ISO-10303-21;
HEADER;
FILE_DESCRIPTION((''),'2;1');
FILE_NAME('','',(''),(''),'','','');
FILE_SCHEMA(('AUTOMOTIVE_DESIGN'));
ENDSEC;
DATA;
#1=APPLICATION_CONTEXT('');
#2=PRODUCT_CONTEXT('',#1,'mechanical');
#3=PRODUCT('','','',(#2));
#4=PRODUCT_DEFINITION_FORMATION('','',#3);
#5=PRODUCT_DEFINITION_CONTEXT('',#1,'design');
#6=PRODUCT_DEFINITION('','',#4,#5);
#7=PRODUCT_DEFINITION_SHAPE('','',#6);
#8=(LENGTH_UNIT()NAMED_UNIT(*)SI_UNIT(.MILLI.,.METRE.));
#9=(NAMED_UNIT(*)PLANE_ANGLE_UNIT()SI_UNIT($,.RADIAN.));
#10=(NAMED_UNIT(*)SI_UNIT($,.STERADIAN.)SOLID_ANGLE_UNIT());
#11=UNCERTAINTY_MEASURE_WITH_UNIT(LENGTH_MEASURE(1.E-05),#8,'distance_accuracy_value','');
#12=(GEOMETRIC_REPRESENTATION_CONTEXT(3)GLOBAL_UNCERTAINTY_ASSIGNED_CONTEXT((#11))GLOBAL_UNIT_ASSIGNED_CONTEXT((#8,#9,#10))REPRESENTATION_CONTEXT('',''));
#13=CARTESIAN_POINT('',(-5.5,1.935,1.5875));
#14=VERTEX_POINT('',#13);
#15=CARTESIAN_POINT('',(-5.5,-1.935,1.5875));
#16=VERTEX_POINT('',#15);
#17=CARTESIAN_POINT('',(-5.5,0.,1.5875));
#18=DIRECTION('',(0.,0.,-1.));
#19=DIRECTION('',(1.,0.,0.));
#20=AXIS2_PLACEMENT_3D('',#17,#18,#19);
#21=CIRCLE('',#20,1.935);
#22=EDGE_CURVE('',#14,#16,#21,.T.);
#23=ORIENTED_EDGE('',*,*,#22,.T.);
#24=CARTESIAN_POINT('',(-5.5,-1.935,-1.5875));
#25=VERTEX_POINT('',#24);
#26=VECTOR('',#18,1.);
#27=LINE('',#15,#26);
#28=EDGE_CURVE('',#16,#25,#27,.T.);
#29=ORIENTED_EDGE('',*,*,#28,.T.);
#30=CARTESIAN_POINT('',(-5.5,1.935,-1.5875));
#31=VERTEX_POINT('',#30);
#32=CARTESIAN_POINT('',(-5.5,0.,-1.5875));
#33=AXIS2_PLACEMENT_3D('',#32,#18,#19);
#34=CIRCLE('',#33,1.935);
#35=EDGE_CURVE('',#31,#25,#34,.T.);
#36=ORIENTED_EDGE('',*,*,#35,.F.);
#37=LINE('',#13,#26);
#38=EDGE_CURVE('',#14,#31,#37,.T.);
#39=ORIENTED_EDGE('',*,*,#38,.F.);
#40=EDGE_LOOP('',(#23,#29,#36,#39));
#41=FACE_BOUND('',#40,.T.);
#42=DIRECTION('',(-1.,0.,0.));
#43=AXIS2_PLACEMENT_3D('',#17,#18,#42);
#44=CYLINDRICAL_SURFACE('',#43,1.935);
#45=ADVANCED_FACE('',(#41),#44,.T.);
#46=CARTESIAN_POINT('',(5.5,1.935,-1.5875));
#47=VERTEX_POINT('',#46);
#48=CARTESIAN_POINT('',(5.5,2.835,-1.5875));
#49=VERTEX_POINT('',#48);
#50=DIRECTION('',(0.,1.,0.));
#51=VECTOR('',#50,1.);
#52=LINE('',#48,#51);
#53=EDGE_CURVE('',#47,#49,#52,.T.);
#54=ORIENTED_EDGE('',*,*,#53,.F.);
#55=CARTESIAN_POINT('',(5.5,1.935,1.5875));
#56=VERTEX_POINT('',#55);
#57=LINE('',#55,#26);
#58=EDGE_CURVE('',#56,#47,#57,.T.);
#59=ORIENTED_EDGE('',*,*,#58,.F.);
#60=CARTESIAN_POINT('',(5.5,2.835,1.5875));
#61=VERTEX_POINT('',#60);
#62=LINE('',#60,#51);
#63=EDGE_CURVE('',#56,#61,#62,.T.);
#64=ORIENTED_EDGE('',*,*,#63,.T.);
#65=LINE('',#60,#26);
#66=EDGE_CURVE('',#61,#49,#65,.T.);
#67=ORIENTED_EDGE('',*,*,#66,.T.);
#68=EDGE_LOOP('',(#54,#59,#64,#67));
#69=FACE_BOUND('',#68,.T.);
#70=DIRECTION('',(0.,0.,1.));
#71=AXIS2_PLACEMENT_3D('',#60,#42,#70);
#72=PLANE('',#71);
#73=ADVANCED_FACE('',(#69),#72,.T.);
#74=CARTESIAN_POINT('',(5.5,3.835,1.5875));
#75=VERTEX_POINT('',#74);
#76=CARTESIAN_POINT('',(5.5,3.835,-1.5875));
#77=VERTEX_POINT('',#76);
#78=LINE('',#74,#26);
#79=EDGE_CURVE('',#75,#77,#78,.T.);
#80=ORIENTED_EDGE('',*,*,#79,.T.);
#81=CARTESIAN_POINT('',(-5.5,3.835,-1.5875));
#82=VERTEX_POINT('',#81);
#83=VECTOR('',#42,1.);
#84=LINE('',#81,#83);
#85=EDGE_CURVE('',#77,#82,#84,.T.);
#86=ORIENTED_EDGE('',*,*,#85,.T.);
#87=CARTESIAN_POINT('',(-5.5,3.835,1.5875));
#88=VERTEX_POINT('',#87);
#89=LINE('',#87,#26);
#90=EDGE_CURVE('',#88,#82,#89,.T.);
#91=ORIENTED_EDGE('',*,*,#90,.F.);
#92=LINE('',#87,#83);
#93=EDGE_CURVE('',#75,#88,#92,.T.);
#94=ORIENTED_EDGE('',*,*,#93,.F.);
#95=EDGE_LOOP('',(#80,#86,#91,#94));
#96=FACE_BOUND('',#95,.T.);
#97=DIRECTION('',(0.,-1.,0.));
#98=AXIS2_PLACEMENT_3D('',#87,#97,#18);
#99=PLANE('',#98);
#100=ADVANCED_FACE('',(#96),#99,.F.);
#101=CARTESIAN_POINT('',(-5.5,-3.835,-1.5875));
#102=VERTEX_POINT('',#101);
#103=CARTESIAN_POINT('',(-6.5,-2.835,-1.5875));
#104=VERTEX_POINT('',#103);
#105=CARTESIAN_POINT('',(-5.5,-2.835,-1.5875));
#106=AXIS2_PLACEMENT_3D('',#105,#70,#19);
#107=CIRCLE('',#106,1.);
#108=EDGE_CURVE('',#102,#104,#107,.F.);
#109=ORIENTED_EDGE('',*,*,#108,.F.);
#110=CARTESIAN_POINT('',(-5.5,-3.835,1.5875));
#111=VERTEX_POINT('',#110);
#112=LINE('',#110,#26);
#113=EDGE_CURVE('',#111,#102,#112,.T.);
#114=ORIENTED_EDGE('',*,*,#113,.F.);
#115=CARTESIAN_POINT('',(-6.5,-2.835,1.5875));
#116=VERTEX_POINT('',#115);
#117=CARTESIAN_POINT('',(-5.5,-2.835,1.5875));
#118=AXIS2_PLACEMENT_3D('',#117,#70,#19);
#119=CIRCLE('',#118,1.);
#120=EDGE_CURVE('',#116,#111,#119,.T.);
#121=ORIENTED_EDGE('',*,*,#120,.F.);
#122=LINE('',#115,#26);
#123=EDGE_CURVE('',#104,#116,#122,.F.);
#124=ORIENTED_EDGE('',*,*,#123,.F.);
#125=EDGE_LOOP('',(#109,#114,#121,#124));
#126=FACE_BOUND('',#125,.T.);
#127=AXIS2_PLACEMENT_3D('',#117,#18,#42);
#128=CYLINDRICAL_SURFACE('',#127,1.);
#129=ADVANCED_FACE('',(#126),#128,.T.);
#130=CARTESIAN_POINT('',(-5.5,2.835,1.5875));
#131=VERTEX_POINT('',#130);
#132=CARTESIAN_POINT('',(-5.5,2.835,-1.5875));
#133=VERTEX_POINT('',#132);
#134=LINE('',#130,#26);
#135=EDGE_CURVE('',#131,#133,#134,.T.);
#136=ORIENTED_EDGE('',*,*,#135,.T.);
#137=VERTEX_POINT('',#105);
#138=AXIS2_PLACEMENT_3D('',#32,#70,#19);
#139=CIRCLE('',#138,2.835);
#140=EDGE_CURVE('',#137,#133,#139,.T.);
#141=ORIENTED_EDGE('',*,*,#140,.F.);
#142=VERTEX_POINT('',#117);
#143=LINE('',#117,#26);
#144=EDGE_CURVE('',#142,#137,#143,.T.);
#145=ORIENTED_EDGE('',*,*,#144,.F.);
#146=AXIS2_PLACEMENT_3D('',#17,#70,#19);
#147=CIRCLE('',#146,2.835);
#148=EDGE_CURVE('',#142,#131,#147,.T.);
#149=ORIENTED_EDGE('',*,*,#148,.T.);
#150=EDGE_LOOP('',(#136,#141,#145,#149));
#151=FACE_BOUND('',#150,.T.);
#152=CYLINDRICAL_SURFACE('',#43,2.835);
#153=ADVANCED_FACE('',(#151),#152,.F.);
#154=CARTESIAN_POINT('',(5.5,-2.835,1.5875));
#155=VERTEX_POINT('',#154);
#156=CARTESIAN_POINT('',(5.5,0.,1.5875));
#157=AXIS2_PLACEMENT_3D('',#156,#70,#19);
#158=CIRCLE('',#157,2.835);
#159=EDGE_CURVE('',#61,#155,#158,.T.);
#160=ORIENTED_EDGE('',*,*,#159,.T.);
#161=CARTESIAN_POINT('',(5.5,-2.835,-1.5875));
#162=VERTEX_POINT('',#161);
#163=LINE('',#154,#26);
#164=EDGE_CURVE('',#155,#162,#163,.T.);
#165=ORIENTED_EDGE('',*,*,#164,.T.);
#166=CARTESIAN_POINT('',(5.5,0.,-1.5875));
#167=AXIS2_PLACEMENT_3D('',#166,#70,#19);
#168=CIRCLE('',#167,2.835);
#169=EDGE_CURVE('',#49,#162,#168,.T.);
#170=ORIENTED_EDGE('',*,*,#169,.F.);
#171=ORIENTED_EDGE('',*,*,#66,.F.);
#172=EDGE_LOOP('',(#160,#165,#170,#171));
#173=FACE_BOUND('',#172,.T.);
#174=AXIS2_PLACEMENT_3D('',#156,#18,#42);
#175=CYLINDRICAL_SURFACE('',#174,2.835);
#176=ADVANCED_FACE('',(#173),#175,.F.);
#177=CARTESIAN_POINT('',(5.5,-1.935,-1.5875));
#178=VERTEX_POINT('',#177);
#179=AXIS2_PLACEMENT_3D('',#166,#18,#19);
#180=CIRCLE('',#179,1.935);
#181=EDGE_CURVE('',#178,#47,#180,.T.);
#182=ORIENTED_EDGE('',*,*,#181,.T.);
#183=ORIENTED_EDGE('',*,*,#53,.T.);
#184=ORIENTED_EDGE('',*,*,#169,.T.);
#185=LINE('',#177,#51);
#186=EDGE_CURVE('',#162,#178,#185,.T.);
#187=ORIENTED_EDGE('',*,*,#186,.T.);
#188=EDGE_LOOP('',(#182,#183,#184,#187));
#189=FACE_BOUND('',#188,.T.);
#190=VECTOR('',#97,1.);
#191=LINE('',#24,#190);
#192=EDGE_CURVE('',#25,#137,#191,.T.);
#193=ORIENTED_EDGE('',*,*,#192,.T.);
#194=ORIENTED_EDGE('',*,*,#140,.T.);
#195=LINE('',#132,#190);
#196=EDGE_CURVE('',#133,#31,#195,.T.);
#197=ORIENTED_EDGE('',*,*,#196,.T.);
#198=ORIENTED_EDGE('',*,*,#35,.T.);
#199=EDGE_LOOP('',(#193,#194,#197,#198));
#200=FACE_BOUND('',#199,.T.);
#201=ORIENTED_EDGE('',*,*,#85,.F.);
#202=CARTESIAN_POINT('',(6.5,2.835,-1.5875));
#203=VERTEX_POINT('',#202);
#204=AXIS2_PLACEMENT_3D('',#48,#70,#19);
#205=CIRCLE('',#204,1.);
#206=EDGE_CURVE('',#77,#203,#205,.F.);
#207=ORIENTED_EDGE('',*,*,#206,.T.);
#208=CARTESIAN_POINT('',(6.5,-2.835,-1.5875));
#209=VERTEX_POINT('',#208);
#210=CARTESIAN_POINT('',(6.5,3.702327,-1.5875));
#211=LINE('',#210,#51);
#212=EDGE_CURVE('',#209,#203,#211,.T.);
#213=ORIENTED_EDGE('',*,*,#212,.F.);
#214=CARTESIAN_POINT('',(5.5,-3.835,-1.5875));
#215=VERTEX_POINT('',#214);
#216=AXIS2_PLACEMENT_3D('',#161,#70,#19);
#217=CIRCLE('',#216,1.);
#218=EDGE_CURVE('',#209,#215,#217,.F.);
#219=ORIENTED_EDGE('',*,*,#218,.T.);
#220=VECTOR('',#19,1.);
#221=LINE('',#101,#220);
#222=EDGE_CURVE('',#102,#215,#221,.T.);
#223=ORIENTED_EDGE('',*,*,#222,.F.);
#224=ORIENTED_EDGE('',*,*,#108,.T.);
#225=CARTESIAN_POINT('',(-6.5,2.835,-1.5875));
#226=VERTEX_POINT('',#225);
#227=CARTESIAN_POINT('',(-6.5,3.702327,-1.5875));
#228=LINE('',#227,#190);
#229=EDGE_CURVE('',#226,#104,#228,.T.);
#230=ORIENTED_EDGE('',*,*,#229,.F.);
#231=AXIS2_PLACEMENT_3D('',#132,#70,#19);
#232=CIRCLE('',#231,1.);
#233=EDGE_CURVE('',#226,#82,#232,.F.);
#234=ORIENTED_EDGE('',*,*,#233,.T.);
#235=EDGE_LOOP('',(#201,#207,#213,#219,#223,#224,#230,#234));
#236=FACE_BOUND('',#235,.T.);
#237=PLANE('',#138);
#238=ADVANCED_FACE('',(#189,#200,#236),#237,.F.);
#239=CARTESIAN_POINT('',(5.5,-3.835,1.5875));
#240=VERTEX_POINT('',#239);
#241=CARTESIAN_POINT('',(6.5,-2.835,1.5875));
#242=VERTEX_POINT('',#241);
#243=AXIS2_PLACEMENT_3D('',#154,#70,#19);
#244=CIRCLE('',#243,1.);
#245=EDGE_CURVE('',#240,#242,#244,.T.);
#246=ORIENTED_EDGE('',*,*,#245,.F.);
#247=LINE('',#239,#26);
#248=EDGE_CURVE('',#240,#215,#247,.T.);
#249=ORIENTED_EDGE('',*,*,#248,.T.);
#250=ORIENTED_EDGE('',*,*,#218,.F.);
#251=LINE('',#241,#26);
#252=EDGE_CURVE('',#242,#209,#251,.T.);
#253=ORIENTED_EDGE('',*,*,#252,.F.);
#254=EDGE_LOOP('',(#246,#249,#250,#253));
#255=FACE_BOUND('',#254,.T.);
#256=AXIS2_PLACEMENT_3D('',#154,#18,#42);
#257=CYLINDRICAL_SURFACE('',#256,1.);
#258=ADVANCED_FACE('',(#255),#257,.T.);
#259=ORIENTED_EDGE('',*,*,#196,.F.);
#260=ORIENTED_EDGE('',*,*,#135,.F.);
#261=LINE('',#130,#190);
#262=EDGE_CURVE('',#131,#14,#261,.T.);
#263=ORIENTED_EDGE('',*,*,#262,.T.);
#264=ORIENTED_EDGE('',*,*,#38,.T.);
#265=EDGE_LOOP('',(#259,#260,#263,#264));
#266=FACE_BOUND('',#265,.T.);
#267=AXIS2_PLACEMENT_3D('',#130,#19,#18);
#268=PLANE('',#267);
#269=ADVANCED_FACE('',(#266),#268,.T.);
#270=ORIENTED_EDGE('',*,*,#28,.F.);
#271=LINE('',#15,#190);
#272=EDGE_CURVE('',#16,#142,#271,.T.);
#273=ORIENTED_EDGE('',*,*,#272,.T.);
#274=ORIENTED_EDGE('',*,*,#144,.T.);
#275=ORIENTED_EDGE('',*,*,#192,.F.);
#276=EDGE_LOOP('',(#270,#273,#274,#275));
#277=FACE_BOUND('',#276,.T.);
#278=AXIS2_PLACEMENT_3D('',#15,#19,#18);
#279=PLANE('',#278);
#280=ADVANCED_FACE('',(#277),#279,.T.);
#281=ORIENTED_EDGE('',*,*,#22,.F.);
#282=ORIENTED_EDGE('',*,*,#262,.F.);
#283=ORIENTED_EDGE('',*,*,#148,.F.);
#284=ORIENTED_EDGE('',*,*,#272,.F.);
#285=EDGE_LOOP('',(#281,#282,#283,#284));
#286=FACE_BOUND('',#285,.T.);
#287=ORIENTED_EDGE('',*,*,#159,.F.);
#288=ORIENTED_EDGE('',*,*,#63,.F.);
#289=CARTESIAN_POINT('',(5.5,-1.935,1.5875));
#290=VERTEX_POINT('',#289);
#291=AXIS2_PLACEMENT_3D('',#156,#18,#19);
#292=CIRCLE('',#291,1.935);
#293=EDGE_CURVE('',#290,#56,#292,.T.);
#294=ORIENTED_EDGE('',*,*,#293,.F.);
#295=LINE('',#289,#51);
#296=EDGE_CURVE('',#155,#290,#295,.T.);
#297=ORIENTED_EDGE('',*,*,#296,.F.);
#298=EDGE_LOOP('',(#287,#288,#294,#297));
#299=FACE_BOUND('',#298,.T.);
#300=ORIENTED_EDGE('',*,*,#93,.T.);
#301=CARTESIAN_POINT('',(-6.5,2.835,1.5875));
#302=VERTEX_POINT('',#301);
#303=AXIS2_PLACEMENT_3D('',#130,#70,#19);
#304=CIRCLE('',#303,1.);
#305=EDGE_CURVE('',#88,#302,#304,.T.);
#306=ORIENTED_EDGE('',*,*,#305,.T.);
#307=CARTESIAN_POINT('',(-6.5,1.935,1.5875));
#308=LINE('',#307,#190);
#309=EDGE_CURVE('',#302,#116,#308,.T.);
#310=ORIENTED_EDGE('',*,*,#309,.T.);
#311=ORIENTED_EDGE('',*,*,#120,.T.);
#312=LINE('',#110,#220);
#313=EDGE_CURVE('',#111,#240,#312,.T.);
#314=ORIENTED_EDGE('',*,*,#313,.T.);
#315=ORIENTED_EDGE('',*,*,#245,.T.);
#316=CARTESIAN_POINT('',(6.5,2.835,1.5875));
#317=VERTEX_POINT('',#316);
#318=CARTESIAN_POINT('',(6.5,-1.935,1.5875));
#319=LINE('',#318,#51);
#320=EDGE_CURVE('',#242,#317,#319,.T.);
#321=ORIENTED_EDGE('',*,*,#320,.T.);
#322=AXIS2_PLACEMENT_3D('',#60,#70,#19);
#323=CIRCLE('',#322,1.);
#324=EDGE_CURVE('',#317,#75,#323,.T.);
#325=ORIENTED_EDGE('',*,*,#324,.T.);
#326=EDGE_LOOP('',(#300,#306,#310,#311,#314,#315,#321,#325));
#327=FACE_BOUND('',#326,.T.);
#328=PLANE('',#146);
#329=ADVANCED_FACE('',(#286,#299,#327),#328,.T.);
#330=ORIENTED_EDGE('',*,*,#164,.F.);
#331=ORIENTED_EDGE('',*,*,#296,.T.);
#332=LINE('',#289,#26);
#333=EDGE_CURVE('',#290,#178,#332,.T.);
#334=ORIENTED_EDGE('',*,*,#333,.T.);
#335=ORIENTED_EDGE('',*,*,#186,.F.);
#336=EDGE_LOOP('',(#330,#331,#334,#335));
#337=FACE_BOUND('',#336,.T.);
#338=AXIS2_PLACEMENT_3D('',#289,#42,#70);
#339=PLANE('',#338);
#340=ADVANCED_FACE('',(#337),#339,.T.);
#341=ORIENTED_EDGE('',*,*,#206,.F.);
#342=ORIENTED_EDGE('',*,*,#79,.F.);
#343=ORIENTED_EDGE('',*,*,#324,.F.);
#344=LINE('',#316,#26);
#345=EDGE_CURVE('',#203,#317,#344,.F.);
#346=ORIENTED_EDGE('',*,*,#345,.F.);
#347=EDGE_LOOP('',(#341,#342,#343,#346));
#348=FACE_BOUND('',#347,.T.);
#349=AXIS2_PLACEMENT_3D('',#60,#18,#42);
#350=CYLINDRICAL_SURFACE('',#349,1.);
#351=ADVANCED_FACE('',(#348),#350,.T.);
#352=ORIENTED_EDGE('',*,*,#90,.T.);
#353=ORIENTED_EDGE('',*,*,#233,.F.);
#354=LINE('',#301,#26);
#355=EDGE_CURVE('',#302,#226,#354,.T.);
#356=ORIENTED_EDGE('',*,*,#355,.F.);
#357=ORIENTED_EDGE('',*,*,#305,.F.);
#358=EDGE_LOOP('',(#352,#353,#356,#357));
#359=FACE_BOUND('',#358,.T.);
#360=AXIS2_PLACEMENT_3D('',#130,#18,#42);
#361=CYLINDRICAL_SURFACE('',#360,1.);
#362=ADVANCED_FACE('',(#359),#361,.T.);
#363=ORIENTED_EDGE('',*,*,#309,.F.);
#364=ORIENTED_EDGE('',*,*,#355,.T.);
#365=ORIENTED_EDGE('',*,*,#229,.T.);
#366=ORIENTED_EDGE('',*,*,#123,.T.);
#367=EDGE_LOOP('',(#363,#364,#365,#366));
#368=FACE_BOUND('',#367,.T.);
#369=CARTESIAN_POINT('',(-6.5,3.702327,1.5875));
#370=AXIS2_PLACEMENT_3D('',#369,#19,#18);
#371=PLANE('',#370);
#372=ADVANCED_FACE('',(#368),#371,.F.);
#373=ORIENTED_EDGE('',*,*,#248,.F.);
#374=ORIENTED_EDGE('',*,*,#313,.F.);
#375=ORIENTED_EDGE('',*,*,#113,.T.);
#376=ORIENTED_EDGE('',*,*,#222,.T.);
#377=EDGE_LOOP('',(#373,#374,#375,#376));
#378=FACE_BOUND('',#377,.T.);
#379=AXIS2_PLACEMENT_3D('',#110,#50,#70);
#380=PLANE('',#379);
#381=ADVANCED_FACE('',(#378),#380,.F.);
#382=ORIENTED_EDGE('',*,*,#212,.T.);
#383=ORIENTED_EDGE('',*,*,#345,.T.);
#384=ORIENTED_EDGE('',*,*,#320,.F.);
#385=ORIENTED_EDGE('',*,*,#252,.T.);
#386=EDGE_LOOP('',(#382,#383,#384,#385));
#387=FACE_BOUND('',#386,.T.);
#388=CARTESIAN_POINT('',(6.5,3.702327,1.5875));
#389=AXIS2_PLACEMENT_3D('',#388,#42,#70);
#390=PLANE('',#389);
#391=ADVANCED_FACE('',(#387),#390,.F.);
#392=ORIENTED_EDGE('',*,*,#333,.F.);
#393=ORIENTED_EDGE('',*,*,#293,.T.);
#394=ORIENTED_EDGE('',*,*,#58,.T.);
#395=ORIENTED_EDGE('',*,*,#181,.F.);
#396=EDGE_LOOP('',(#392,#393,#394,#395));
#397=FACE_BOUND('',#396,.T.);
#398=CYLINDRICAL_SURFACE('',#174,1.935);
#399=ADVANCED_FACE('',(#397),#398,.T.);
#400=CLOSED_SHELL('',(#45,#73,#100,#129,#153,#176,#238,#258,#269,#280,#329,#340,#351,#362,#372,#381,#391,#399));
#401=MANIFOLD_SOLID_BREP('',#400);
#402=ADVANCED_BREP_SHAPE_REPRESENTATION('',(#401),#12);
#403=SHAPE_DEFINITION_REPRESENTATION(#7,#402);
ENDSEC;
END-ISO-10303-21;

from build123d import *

# Parameters (mm, degrees)
BOSS_EXTRUDE2_DEPTH = 1.5875
FILLET2_R           = 1


with BuildPart() as part:
    # Sketch1 → Boss-Extrude2 (new, symmetric)
    with BuildSketch(Plane.XY):
        with BuildLine():
            Line((-6.5, -1.935), (-6.5, -3.702326971))
            ThreePointArc((-6.5, -3.702326971), (-6.004381337, -3.801687055), (-5.5, -3.835))
            Line((-5.5, -3.835), (5.5, -3.835))
            ThreePointArc((5.5, -3.835), (6.004381337, -3.801687055), (6.5, -3.702326971))
            Line((6.5, -3.702326971), (6.5, -1.935))
            Line((6.5, -1.935), (6.5, 1.935))
            Line((6.5, 1.935), (6.5, 3.702326971))
            ThreePointArc((6.5, 3.702326971), (6.004381337, 3.801687055), (5.5, 3.835))
            Line((5.5, 3.835), (-5.5, 3.835))
            ThreePointArc((-5.5, 3.835), (-6.004381337, 3.801687055), (-6.5, 3.702326971))
            Line((-6.5, 3.702326971), (-6.5, 1.935))
            Line((-6.5, 1.935), (-6.5, -1.935))
        make_face()
        with BuildLine():
            Line((-5.5, 2.835), (-5.5, 1.935))
            ThreePointArc((-5.5, 1.935), (-3.565, 0), (-5.5, -1.935))
            Line((-5.5, -1.935), (-5.5, -2.835))
            ThreePointArc((-5.5, -2.835), (-2.665, 0), (-5.5, 2.835))
        make_face(mode=Mode.SUBTRACT)
        with BuildLine():
            Line((5.5, -1.935), (5.5, -2.835))
            ThreePointArc((5.5, -2.835), (2.665, 0), (5.5, 2.835))
            Line((5.5, 2.835), (5.5, 1.935))
            ThreePointArc((5.5, 1.935), (3.565, 0), (5.5, -1.935))
        make_face(mode=Mode.SUBTRACT)
    extrude(amount=BOSS_EXTRUDE2_DEPTH, both=True)

    # Fillet2
    fillet2_edges = [part.edges().sort_by_distance(p)[0] for p in [
        (6.5, -3.702326971, 0),
        (-6.5, -3.702326971, 0),
        (6.5, 3.702326971, 0),
        (-6.5, 3.702326971, 0),
    ]]
    fillet(fillet2_edges, radius=FILLET2_R - 0.0001)  # a hair under: the kernel refuses the full size


solid = part.part
